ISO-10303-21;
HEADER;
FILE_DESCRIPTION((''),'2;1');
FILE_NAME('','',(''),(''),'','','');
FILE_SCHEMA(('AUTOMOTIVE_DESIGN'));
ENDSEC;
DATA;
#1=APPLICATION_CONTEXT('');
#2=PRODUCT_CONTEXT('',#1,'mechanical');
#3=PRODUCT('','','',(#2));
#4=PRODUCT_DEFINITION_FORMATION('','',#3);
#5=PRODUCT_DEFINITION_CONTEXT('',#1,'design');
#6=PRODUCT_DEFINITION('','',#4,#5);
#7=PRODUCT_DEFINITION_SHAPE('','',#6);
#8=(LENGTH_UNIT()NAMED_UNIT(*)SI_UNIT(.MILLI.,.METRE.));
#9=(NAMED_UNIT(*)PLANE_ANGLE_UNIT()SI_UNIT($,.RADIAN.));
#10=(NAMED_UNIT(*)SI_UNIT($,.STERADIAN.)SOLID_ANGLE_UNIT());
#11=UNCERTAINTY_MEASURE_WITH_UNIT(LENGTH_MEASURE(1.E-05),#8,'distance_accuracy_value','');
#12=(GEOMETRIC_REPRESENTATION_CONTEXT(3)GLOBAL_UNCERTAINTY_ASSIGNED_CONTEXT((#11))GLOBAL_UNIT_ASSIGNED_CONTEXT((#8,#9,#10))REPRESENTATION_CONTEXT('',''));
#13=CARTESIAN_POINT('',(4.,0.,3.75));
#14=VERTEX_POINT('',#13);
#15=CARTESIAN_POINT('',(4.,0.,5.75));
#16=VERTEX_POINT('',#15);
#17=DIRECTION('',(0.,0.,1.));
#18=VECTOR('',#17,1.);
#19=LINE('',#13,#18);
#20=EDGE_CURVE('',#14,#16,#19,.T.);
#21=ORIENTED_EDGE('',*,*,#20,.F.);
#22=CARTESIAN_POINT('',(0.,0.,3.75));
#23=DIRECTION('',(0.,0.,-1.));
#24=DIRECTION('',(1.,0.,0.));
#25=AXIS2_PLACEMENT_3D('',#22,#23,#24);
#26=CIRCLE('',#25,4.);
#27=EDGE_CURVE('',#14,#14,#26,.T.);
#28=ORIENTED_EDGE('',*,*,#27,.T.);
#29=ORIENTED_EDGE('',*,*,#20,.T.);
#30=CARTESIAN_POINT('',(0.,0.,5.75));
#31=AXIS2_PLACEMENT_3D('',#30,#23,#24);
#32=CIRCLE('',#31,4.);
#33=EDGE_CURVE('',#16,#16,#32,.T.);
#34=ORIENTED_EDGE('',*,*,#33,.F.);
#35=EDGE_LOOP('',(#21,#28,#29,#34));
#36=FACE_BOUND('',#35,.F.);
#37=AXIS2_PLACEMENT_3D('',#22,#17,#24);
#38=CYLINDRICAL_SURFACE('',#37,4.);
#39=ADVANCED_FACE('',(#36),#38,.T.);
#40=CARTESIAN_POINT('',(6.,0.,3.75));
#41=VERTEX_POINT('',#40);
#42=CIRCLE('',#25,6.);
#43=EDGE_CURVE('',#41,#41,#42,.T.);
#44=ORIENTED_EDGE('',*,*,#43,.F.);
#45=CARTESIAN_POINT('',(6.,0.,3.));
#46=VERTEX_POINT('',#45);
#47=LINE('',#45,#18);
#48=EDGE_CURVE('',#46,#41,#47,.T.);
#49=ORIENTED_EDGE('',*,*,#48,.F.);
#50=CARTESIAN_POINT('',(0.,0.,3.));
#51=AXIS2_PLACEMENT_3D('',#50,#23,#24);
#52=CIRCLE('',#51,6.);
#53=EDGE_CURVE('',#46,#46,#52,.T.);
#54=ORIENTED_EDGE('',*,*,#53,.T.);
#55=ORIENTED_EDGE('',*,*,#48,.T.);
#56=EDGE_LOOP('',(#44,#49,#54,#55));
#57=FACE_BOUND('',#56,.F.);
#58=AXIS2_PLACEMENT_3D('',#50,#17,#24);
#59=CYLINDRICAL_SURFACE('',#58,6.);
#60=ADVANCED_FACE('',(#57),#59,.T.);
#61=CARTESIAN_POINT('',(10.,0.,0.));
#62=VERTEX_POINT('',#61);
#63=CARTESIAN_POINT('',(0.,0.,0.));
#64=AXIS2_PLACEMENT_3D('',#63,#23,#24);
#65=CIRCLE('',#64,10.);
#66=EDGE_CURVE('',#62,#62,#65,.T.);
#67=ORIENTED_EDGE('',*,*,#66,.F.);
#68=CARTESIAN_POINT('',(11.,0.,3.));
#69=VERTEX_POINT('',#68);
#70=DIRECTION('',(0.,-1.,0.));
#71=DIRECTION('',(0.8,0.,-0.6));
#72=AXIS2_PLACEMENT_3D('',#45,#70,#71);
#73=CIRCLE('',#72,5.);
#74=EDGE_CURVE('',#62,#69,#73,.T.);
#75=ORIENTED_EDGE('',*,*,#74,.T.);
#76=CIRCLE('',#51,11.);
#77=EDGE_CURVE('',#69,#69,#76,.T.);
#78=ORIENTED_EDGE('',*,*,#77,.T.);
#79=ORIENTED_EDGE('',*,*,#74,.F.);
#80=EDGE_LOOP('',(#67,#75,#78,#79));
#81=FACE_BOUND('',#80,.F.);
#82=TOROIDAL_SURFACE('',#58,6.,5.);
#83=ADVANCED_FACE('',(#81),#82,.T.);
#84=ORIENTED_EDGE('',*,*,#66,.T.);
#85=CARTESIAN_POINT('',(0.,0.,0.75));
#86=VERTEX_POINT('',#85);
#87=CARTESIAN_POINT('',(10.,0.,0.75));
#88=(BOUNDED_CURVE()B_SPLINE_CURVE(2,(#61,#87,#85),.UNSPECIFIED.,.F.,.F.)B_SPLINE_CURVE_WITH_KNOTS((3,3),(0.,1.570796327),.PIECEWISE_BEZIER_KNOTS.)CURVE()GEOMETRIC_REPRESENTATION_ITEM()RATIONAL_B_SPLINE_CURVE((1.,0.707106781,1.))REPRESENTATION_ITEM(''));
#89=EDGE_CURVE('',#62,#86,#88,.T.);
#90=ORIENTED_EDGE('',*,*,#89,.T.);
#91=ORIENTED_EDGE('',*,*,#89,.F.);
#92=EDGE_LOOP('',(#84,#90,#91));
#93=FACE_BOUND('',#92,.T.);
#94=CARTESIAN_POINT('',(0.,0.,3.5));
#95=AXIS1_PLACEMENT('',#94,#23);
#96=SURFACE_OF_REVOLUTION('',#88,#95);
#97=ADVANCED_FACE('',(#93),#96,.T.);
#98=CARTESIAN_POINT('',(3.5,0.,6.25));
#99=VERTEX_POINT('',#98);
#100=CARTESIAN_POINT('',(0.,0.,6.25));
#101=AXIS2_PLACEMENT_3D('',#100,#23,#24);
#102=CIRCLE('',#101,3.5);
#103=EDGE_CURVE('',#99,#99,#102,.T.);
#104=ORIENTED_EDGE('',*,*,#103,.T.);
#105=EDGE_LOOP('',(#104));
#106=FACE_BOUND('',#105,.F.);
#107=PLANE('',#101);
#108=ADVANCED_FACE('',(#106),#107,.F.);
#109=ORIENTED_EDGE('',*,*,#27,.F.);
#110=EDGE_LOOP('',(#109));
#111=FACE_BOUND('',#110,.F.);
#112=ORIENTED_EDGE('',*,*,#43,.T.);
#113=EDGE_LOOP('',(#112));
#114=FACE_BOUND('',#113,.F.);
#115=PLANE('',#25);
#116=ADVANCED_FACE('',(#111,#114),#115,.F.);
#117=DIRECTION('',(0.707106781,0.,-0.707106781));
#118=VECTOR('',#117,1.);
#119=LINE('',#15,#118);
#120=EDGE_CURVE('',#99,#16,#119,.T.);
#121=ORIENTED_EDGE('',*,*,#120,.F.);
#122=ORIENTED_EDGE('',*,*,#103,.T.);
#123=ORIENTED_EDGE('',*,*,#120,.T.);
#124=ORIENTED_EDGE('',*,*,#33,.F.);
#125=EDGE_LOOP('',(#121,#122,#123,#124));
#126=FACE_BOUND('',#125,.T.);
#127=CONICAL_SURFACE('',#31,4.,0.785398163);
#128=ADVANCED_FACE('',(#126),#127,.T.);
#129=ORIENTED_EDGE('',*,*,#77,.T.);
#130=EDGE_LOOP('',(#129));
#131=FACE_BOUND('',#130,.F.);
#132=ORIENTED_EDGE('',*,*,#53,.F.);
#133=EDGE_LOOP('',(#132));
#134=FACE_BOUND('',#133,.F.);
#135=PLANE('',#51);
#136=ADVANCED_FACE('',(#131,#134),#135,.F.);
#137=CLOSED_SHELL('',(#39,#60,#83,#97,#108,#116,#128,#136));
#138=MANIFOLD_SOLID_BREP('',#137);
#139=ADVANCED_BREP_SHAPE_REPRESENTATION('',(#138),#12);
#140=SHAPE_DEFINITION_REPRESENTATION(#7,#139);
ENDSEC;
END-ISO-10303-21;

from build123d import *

# Parameters (mm, degrees)
F3_SIZE = 0.5


# Not quite as in the source:
# - a fillet or chamfer that OpenCascade refuses, or shapes differently, is made with other operations: its cross-section is extruded or revolved along the edge and cut away or added


with BuildPart() as f1:
    # F0 (on Front) → F1 (revolve)
    with BuildSketch(Plane.XZ):
        with BuildLine():
            Line((4, 6.25), (0, 6.25))
            Line((0, 6.25), (0, 0.75))
            add(Edge.make_bspline(
                [(10, 0), (10, 0.75), (0, 0.75)],
                knots=[0, 0, 0, 1.5707963268, 1.5707963268, 1.5707963268], degree=2, weights=[1, 0.7071067812, 1]))
            Line((10, 0), (11, 0))
            Line((11, 0), (11, 3))
            Line((11, 3), (6, 3))
            Line((6, 3), (6, 3.75))
            Line((6, 3.75), (4, 3.75))
            Line((4, 3.75), (4, 6.25))
        make_face()
    revolve(axis=Axis((0, 0, 3.5), (0, 0, -1)))

    # F2: fillet of radius 5 on 1 edges, made by hand

    # F2_s1 → F2_t2 (revolve, cut)
    with BuildSketch(Plane.XZ):
        with BuildLine():
            ThreePointArc((10, 0), (10.7434164903, 1.4188611699), (11, 3))
            Line((11, 3), (11, 0))
            Line((11, 0), (10, 0))
        make_face()
    revolve(axis=Axis((0, 0, 0), (0, 0, -1)), mode=Mode.SUBTRACT)

    # F3
    f3_edges = [f1.edges().sort_by_distance(p)[0] for p in [
        (-4, 0, 6.25),
    ]]
    chamfer(f3_edges, length=F3_SIZE)


solid = f1.part
